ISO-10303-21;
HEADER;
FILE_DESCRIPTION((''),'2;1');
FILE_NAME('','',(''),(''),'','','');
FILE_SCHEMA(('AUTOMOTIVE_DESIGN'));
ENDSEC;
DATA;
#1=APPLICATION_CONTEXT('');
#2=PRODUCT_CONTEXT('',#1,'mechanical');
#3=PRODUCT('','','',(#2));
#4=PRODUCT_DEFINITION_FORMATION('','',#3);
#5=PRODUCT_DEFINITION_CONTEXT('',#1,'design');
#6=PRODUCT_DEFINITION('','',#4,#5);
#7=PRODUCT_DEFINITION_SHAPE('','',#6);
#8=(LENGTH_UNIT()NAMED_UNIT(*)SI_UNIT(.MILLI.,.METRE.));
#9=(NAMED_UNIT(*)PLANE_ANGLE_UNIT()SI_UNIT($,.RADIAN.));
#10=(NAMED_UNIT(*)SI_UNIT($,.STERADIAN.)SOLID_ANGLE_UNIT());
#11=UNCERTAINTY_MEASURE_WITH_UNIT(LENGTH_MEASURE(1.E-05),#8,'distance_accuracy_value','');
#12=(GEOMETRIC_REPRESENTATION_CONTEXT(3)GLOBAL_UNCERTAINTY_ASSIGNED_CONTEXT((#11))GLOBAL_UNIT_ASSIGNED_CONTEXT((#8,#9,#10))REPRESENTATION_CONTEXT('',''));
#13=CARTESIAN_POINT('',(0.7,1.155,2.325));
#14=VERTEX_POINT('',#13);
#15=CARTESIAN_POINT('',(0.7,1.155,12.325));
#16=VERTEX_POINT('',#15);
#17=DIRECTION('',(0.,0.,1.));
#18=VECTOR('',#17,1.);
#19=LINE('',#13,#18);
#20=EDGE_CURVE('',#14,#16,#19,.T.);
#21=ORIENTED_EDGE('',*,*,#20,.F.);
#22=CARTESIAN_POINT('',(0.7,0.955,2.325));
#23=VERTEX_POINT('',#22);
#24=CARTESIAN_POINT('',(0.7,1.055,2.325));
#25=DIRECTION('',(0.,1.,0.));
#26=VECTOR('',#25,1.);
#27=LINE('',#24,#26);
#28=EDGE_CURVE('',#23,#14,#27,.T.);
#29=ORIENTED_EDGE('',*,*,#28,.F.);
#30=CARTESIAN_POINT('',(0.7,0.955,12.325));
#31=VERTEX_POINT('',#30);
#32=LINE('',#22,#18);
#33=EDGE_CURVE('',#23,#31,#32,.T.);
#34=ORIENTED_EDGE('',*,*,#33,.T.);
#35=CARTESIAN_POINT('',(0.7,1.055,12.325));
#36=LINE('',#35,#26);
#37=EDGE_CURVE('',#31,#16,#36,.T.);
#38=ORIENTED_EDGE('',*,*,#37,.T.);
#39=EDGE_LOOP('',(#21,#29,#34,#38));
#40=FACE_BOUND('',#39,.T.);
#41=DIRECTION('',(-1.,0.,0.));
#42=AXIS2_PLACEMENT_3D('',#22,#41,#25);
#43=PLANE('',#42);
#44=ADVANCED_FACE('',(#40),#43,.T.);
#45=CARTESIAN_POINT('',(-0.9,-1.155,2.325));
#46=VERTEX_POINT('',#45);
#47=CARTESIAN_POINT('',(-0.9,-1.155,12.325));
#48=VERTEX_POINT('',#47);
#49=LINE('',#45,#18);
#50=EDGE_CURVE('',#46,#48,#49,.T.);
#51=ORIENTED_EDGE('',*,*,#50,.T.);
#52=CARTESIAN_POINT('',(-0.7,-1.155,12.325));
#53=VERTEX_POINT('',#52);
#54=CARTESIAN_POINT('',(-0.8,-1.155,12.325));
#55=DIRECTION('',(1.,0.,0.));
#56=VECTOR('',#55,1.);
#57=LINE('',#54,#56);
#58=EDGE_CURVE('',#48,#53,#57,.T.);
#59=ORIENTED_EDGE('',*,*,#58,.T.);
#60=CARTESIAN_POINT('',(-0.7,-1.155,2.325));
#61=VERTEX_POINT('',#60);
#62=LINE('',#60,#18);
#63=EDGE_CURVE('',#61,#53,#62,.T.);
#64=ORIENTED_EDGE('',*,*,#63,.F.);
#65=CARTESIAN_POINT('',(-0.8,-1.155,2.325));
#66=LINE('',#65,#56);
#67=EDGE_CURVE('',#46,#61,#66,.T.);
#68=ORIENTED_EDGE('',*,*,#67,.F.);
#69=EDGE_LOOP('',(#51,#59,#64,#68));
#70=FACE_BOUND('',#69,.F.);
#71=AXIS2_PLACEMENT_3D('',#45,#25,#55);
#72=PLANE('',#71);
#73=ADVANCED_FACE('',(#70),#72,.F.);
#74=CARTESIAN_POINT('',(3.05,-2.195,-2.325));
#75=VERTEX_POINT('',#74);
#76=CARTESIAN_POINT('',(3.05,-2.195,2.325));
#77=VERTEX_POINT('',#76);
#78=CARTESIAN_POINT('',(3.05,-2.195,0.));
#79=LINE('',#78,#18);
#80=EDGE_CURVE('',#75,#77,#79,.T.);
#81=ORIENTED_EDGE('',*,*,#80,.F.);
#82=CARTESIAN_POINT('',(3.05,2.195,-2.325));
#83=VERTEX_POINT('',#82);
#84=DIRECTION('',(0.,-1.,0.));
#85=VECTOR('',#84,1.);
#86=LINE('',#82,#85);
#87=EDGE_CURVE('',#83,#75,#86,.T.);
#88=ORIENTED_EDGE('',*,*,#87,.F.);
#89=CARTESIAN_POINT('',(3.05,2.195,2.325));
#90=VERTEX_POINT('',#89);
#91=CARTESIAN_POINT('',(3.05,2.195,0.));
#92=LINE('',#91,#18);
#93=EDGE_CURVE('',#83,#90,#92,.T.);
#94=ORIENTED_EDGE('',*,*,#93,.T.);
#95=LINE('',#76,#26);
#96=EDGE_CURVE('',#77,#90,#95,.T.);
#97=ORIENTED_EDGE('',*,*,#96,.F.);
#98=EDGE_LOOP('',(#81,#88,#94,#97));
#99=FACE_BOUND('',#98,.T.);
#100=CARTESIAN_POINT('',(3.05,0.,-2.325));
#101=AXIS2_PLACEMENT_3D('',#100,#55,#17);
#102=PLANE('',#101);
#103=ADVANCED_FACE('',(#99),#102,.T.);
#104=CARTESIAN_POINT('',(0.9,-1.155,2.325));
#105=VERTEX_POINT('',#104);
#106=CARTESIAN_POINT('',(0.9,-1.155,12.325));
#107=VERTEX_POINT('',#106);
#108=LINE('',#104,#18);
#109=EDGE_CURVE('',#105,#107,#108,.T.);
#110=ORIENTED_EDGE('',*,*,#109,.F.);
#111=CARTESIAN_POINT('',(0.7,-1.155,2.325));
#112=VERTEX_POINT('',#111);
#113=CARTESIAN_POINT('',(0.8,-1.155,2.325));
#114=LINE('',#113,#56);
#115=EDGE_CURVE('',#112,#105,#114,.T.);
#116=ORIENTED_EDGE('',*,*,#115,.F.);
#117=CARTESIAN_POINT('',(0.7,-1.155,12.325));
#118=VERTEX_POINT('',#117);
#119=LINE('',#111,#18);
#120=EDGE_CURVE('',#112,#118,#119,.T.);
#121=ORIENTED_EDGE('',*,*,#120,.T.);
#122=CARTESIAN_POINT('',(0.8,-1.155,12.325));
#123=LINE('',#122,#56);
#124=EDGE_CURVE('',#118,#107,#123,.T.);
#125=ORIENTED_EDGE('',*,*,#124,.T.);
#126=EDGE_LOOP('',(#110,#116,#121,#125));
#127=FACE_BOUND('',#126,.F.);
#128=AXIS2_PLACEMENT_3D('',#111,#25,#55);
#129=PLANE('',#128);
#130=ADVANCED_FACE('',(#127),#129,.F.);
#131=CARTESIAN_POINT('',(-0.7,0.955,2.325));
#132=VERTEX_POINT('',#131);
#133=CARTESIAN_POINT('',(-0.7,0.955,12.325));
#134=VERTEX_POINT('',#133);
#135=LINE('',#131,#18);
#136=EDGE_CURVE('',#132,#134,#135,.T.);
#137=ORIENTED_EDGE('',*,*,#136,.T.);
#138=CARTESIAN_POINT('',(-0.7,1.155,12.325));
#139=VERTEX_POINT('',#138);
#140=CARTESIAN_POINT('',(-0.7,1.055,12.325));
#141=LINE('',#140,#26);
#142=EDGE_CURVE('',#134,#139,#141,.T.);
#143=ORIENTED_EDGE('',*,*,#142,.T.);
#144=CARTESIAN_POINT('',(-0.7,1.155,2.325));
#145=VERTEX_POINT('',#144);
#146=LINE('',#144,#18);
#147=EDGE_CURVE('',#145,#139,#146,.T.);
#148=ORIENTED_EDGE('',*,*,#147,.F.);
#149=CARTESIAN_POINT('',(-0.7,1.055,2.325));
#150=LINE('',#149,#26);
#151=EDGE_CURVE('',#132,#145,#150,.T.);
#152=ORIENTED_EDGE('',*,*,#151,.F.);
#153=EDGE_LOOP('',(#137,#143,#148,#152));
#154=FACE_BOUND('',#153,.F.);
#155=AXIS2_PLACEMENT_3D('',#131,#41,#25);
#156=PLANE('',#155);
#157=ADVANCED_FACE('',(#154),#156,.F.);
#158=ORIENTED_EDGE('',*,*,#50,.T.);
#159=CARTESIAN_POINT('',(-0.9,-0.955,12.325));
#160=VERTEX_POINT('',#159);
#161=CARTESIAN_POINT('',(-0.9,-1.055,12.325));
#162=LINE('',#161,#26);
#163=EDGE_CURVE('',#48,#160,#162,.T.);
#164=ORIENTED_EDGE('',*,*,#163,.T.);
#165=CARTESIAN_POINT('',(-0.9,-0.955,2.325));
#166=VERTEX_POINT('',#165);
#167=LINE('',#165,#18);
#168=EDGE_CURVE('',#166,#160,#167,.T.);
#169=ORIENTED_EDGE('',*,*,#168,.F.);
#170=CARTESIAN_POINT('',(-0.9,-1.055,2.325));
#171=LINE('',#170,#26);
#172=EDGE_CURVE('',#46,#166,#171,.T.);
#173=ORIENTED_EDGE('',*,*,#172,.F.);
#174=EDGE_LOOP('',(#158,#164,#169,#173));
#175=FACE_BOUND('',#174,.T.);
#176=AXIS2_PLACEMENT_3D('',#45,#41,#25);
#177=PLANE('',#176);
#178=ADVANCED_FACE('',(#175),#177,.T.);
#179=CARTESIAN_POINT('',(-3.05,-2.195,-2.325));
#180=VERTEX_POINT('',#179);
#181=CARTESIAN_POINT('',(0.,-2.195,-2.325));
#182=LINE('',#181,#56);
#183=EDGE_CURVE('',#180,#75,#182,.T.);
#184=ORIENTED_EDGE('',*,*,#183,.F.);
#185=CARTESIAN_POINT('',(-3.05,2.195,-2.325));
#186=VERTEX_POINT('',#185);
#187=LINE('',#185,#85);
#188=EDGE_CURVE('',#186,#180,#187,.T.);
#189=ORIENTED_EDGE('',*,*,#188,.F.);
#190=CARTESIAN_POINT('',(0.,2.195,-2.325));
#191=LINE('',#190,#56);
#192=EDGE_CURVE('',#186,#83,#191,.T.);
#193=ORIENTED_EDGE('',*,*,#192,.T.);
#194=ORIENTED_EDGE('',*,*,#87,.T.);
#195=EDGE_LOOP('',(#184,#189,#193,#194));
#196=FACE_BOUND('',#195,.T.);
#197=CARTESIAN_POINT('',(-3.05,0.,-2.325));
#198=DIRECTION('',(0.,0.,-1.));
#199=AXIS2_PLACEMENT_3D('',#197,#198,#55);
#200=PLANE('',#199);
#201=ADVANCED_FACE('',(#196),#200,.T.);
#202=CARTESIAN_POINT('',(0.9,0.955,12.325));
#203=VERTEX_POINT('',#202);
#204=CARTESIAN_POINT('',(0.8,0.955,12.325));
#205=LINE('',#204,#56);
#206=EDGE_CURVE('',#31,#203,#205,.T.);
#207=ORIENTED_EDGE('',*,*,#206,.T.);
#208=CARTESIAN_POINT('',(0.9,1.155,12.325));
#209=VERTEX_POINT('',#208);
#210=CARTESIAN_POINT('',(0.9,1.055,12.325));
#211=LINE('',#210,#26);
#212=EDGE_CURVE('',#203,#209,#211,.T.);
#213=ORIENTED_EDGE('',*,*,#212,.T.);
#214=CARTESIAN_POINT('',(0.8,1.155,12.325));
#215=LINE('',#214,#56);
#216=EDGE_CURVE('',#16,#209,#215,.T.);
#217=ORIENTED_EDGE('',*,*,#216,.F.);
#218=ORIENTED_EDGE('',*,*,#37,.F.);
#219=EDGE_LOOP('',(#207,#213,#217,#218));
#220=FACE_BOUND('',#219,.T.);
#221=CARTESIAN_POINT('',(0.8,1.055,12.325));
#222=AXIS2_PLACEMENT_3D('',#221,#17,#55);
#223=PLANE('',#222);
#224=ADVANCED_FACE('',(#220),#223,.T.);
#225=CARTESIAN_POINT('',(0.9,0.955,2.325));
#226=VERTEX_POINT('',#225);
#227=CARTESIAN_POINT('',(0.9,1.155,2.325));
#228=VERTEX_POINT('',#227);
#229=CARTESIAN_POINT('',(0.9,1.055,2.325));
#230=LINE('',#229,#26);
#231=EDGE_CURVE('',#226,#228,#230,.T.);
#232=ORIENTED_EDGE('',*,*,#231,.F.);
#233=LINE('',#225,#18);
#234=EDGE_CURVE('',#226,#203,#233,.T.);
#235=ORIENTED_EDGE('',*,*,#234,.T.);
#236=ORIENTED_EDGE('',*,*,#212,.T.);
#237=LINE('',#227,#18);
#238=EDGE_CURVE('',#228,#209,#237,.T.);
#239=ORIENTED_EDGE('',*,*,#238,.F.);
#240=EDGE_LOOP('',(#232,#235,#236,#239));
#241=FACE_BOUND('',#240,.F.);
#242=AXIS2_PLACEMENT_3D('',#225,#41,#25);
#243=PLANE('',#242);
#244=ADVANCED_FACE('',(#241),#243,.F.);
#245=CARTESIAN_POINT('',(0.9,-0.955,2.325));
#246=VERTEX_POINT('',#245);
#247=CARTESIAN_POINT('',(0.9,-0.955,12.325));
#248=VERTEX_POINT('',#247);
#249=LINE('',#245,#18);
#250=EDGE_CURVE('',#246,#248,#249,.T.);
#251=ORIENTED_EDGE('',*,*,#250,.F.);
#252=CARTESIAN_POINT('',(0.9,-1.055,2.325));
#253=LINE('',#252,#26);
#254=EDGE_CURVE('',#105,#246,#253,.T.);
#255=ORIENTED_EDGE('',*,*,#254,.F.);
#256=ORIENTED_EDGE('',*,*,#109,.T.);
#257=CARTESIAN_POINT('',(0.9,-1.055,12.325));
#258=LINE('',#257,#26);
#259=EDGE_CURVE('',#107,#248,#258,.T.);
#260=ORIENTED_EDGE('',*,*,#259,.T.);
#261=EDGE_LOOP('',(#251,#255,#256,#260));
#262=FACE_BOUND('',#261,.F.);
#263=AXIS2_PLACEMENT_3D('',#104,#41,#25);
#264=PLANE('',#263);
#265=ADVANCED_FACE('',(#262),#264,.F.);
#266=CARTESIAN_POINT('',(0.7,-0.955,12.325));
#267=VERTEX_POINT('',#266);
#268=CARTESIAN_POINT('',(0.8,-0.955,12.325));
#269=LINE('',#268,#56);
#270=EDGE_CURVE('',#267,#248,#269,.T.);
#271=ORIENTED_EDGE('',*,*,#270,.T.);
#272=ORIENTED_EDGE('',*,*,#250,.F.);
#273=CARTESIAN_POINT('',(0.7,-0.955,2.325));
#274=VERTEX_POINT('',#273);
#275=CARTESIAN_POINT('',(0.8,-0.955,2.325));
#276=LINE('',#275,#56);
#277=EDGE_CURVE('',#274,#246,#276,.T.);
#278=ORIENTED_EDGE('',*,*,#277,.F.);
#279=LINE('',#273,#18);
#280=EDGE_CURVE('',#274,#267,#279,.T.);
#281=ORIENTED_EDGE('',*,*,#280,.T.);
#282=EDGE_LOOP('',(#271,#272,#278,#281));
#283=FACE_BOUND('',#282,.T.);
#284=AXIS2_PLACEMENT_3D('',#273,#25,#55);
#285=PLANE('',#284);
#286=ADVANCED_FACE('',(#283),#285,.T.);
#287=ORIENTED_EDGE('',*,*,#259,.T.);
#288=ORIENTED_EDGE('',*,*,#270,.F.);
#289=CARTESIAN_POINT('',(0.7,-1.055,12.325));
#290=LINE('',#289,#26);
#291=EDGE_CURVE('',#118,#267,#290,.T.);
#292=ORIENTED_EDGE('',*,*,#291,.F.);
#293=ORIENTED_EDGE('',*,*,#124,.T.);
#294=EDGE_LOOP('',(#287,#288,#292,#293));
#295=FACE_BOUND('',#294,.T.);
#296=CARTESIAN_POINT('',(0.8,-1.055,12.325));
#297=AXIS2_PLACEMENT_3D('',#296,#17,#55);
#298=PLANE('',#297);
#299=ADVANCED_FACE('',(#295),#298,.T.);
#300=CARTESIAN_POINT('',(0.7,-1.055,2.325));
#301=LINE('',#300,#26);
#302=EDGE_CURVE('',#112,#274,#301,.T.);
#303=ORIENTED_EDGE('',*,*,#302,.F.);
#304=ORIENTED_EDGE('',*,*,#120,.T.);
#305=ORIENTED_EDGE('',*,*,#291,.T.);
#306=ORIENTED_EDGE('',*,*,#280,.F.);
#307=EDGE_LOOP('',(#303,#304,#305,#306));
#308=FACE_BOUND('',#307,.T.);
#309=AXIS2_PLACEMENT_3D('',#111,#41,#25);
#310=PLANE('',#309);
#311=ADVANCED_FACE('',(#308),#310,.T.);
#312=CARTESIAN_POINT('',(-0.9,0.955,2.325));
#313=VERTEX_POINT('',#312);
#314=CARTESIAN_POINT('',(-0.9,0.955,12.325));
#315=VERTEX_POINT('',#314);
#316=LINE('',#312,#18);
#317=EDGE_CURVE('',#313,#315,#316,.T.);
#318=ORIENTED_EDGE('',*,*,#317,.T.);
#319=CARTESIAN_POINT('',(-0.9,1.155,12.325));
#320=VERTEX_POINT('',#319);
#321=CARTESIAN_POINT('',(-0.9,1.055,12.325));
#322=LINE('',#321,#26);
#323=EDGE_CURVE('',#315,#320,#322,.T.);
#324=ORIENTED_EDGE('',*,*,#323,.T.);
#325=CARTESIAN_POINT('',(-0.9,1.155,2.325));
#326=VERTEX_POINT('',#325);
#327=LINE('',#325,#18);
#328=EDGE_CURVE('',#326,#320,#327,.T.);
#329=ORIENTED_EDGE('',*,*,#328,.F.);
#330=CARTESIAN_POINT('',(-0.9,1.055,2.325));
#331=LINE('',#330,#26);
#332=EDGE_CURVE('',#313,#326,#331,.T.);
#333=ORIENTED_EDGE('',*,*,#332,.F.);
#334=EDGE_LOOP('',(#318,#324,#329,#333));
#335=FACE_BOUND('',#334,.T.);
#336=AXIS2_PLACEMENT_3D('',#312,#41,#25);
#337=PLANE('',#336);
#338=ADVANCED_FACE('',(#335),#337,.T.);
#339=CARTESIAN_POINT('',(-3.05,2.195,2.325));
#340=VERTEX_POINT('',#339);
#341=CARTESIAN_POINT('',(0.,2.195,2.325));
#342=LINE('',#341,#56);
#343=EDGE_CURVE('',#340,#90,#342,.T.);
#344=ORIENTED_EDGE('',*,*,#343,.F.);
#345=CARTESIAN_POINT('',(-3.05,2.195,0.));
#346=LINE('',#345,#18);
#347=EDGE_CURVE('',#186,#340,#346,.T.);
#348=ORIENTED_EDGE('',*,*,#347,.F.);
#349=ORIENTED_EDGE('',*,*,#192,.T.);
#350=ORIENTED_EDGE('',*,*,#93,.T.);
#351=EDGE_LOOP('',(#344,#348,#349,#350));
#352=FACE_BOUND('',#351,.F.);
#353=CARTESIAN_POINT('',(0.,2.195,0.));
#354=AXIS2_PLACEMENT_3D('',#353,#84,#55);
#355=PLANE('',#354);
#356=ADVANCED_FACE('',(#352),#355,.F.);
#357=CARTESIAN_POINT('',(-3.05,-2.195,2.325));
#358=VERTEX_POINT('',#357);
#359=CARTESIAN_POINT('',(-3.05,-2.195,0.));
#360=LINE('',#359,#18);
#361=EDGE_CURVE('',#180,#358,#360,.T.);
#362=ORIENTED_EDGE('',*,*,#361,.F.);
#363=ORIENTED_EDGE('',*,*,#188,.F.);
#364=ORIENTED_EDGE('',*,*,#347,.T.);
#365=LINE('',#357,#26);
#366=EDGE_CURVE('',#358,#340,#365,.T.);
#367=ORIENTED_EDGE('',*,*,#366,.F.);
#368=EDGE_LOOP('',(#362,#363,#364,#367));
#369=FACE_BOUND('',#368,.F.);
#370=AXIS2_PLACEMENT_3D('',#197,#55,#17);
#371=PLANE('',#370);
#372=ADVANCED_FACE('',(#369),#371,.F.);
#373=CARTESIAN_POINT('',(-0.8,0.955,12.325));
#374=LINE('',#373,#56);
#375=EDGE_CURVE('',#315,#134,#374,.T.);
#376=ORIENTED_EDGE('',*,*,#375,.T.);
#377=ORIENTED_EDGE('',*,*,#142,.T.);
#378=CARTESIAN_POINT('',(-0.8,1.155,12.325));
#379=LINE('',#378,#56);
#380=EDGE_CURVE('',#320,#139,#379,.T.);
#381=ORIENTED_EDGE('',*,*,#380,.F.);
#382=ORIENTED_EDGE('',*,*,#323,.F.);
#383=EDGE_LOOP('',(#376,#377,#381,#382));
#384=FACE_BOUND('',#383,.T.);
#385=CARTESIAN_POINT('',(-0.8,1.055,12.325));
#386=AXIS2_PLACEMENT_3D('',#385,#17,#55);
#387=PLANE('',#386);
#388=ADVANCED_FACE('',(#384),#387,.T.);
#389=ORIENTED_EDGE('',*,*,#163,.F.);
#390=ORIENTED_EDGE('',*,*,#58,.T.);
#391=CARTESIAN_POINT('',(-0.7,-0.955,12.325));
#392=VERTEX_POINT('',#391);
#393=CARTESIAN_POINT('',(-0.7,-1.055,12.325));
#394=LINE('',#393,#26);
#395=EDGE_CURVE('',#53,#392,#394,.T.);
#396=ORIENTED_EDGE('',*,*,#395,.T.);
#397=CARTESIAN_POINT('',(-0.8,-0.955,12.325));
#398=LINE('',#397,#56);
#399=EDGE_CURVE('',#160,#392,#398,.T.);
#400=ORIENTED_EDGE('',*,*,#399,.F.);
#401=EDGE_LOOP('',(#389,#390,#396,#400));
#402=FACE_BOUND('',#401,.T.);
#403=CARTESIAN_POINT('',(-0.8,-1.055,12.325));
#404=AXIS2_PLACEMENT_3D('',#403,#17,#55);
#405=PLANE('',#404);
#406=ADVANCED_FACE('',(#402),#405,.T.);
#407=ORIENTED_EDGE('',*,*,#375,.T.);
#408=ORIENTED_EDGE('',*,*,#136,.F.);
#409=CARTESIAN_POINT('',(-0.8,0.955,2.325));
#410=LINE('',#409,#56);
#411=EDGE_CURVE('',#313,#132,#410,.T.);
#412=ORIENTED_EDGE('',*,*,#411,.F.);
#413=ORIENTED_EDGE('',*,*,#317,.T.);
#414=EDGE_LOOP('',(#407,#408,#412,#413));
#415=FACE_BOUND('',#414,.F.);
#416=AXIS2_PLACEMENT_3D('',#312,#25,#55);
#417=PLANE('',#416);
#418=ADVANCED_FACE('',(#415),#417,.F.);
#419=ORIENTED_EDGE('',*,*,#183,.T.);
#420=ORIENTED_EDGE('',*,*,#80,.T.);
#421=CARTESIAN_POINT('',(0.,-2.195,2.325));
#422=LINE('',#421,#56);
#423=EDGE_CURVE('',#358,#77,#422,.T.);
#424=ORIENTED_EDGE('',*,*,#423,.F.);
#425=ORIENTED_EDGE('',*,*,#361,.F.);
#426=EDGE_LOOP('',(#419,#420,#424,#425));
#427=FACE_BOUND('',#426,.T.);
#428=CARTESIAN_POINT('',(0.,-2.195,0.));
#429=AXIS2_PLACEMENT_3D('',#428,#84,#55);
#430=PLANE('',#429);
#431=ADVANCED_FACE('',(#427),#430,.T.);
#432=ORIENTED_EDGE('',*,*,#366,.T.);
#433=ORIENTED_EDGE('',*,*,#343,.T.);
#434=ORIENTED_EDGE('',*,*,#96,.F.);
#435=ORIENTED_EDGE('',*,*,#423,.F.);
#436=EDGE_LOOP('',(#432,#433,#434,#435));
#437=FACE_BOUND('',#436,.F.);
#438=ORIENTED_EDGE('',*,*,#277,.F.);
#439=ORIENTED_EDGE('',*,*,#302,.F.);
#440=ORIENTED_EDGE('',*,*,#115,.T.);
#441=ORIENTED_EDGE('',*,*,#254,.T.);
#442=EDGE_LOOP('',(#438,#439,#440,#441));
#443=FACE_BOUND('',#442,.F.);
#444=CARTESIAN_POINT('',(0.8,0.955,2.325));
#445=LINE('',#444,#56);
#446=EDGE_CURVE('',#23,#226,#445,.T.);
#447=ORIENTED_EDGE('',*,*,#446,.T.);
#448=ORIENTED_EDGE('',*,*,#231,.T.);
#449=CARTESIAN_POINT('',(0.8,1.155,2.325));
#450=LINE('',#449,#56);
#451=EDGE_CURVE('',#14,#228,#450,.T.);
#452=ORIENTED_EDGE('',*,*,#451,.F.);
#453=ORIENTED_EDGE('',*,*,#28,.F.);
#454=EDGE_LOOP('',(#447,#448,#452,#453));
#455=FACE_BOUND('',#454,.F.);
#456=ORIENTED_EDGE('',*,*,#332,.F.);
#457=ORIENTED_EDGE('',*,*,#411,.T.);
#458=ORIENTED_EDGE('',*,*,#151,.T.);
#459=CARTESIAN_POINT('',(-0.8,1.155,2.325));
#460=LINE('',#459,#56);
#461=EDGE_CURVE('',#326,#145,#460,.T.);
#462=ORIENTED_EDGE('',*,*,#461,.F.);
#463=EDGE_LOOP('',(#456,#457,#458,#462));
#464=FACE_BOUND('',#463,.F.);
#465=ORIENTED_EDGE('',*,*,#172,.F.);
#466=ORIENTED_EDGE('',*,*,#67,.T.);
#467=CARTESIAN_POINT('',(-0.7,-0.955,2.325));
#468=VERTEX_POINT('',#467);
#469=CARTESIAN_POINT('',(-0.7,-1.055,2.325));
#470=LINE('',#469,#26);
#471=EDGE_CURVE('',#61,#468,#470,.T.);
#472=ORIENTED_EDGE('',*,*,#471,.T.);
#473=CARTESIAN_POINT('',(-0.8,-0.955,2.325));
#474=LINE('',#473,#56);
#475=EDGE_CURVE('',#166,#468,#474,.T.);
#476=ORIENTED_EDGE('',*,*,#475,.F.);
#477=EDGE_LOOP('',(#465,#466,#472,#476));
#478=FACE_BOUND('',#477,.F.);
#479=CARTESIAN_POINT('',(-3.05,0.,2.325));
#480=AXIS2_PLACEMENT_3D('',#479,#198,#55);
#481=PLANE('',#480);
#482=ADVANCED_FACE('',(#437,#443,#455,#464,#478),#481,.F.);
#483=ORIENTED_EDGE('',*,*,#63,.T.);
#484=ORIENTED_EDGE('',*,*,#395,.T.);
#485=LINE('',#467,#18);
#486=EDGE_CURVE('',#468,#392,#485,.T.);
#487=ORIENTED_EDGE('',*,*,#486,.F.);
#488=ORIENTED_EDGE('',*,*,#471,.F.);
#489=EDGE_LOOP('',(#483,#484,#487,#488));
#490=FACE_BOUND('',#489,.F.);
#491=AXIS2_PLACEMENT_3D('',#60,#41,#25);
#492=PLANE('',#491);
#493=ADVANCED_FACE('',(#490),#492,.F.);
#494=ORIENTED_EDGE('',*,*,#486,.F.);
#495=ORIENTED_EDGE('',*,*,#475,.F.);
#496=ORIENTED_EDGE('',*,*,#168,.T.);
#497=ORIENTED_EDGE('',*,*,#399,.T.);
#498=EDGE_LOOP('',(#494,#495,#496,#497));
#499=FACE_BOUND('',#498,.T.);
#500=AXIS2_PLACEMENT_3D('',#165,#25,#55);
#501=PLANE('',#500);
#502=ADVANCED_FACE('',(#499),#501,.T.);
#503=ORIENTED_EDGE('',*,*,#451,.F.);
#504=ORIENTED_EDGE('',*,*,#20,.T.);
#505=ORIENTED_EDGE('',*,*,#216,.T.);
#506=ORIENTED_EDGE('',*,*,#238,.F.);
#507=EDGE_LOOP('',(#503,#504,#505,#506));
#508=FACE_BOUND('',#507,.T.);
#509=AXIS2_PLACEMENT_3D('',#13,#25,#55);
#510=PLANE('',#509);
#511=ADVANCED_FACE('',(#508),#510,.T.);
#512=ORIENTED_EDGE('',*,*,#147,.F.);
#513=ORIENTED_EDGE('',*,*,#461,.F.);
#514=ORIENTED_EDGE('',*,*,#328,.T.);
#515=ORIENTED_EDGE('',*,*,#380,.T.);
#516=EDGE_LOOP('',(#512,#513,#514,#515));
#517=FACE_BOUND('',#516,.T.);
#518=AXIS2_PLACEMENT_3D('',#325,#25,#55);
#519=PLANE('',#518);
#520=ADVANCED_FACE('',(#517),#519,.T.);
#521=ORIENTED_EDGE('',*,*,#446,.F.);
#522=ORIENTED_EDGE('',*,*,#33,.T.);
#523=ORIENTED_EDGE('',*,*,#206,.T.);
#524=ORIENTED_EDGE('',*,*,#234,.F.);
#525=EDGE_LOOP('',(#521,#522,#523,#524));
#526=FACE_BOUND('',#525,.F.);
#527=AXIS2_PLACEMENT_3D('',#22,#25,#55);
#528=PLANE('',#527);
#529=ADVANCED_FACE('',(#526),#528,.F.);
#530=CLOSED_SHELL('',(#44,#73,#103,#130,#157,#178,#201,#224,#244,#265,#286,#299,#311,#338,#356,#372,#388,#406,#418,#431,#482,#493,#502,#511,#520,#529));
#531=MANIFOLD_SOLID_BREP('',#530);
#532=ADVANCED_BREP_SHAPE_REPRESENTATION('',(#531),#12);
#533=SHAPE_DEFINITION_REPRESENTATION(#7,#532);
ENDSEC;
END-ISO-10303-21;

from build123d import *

# Parameters (mm, degrees)
F0_W     = 6.1
F0_H     = 4.65
F1_DEPTH = 2.195
F3_W     = 0.2
F3_H     = 0.2
F4_DEPTH = 10


# Not quite as in the source:
# - a feature of the source that left no trace in its solid (it failed there, or was rolled back) is left out


with BuildPart() as f1:
    # F0 (on Front) → F1 (new body, symmetric)
    with BuildSketch(Plane.XZ):
        Rectangle(F0_W, F0_H)
    extrude(amount=F1_DEPTH, both=True)

    # F3 (on face) → F4 (join)
    with BuildSketch(Plane.XY.offset(2.325)):
        with Locations((0.8, 1.055)):
            Rectangle(F3_W, F3_H)
        with Locations((-0.8, 1.055)):
            Rectangle(F3_W, F3_H)
        with Locations((0.8, -1.055)):
            Rectangle(F3_W, F3_H)
        with Locations((-0.8, -1.055)):
            Rectangle(F3_W, F3_H)
    extrude(amount=F4_DEPTH)


solid = f1.part
